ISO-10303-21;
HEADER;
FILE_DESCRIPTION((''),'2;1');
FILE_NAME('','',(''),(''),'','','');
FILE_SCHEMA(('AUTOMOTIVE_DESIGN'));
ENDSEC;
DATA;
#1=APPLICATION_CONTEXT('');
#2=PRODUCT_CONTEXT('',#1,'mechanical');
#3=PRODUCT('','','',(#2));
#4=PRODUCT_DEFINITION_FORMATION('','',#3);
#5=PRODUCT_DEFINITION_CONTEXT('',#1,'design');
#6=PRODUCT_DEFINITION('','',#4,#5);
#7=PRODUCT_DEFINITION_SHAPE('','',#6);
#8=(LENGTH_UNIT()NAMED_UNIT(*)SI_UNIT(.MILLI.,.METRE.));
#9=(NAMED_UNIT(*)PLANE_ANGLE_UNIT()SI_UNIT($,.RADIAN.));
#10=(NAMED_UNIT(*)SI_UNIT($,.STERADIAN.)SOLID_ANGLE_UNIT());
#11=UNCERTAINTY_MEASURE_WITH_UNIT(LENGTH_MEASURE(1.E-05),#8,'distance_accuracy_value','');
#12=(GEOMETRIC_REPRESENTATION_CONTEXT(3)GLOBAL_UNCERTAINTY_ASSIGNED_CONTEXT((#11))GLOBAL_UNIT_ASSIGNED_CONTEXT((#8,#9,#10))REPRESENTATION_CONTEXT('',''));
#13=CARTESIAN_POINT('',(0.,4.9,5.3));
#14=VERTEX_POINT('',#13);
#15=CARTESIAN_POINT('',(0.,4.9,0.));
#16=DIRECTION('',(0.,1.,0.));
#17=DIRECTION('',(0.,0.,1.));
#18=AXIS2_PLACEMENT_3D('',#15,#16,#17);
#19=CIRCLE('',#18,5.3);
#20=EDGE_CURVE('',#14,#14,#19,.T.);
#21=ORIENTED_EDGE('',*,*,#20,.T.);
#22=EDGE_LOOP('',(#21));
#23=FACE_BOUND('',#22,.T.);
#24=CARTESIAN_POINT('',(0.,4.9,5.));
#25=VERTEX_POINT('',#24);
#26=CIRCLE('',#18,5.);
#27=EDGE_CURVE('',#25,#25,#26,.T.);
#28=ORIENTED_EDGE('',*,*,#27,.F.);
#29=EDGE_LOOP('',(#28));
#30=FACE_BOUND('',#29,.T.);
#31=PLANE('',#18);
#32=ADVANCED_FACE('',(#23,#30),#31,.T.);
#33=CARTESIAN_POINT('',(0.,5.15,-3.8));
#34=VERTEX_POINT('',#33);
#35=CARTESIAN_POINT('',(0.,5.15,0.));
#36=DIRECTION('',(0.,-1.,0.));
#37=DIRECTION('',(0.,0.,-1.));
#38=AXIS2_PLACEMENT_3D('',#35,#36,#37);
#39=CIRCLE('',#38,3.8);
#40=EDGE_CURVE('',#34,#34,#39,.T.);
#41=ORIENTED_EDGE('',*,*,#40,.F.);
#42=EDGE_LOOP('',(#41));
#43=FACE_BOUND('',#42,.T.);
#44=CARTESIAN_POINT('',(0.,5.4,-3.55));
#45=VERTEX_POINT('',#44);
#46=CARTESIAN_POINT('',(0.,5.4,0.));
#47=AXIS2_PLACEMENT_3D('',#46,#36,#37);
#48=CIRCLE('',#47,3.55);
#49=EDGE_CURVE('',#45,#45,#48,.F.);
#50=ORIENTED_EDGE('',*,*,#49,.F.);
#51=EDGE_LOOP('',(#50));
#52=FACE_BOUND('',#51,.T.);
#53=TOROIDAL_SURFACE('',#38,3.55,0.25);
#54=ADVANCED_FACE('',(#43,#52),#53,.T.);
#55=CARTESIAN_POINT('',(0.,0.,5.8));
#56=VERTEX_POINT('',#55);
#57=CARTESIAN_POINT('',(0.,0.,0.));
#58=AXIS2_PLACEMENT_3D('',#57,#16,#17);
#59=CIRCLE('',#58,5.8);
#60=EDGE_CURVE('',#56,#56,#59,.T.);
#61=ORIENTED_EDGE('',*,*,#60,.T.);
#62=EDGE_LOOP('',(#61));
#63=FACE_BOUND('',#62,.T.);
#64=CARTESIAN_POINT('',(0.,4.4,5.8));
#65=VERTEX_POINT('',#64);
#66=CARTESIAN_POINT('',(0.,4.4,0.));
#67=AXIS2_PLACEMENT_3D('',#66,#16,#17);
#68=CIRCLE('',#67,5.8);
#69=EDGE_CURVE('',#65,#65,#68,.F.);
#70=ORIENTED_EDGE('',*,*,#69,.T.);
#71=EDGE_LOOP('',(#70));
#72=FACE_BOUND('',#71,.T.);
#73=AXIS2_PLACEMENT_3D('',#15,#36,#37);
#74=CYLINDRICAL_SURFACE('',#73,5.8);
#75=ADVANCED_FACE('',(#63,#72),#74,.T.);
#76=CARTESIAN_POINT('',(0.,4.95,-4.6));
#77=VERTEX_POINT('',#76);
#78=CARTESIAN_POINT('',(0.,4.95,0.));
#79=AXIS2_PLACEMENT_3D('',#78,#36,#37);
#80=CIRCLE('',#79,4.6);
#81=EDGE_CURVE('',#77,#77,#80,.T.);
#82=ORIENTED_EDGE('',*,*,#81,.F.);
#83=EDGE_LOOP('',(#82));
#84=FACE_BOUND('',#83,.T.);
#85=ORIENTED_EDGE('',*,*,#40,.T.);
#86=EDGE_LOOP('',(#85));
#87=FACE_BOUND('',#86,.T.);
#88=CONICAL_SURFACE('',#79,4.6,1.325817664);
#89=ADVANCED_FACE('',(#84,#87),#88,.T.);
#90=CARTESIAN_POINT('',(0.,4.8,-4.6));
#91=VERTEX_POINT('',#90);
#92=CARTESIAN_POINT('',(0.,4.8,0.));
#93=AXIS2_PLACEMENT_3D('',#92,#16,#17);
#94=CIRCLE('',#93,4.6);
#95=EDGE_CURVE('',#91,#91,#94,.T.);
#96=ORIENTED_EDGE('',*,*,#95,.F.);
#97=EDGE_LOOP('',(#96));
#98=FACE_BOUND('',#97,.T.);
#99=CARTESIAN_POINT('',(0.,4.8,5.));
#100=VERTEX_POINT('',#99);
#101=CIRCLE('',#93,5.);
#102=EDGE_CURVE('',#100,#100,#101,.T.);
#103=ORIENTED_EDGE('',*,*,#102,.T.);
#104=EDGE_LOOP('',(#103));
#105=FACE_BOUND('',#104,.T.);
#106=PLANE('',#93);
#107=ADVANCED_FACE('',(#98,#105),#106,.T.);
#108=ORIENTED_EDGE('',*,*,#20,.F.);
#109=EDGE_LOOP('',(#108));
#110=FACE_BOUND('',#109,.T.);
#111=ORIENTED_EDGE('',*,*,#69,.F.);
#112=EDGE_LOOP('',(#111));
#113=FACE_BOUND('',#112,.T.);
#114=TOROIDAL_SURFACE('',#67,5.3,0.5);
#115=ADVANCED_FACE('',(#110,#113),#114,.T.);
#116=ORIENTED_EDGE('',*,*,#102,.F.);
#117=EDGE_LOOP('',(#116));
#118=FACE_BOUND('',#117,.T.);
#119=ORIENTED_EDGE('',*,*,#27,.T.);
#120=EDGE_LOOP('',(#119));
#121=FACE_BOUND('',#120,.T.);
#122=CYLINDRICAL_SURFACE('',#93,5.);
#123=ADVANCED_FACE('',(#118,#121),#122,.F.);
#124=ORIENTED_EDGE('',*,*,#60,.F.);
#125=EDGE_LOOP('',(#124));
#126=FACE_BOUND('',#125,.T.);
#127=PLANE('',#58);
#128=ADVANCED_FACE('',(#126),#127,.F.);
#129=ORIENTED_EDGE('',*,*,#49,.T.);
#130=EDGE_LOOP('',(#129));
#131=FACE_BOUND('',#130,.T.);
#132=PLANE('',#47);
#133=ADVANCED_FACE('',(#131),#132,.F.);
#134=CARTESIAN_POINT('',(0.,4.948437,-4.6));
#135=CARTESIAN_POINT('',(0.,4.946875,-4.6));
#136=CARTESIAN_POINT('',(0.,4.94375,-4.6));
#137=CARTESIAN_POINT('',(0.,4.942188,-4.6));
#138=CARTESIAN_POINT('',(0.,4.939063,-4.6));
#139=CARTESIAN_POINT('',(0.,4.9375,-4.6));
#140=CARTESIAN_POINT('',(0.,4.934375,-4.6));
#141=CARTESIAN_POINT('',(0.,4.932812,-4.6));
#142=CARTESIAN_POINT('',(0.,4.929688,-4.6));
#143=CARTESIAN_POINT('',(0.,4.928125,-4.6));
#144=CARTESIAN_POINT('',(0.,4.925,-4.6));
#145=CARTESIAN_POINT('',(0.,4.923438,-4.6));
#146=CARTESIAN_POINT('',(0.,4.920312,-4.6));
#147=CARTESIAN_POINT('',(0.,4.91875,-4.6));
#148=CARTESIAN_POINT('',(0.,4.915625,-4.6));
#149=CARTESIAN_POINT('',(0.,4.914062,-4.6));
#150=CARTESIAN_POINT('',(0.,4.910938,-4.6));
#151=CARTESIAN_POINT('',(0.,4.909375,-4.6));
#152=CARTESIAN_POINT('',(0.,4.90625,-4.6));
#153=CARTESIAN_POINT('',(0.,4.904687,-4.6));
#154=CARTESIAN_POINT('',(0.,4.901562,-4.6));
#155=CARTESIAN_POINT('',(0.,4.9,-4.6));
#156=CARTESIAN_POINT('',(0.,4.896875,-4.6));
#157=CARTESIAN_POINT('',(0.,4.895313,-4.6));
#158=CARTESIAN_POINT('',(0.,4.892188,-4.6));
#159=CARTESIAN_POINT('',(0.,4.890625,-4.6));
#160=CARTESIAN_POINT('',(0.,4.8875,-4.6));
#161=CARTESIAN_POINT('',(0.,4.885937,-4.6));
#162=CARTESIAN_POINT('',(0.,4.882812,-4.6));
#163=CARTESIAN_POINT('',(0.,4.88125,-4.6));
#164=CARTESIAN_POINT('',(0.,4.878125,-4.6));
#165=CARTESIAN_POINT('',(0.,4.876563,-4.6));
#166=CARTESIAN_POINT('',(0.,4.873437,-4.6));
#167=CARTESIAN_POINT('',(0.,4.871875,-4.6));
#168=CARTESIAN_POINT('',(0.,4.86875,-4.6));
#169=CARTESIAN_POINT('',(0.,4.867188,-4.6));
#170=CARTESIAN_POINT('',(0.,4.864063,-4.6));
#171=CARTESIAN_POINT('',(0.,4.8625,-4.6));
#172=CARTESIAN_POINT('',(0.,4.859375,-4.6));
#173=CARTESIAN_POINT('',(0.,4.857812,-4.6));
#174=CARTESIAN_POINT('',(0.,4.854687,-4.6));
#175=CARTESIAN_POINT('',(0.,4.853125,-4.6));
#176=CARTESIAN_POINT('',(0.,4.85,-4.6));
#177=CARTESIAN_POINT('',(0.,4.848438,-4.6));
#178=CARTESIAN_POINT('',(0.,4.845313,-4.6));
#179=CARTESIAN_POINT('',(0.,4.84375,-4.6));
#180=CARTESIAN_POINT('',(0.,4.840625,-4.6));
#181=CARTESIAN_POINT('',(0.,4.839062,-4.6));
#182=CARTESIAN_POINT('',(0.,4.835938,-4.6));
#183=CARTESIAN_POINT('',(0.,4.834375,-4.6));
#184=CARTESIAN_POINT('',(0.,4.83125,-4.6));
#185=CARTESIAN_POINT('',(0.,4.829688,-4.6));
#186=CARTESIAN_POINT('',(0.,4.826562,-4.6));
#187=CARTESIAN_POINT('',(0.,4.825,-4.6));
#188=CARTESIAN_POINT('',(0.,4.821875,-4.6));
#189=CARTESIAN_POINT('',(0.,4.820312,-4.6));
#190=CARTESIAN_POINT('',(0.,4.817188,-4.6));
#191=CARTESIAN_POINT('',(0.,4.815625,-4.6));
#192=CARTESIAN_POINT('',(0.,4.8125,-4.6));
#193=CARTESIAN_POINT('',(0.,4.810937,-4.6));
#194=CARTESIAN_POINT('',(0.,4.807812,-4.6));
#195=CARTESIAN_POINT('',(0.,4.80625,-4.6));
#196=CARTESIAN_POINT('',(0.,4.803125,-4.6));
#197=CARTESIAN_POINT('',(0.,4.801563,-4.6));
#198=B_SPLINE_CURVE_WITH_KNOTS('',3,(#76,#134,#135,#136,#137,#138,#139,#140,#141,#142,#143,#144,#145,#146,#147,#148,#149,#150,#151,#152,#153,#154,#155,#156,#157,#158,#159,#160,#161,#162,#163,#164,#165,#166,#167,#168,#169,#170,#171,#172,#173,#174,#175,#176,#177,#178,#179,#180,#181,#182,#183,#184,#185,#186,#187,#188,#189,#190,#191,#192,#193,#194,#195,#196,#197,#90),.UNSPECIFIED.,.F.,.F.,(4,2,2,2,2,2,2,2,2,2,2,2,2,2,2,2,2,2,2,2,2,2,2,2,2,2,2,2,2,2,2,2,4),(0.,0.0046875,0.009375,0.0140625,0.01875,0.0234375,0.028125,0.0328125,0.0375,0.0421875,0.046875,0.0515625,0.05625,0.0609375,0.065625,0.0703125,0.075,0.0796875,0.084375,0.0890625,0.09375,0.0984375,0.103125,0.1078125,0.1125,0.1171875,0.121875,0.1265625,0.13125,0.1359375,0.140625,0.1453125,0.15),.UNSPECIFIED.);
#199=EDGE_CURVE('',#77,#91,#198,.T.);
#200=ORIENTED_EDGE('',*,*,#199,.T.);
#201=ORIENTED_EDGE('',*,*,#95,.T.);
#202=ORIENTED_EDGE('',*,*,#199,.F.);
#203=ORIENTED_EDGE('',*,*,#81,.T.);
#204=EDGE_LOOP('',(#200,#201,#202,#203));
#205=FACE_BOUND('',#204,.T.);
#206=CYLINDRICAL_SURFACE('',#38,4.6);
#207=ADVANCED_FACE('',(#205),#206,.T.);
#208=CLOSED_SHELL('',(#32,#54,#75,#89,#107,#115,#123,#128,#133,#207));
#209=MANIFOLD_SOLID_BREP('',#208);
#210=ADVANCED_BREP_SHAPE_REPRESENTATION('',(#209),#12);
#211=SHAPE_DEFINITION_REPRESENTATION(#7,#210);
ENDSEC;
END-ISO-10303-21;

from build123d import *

# Parameters (mm, degrees)
CROQUIS1_R              = 5.8
SALIENTE_EXTRUIR1_DEPTH = 4.9
REDONDEO1_R             = 0.5
CROQUIS2_R              = 5
CORTAR_EXTRUIR1_DEPTH   = 0.1
CROQUIS3_R              = 4.6
SALIENTE_EXTRUIR2_DEPTH = 5.15
CROQUIS4_R              = 3.8
SALIENTE_EXTRUIR3_DEPTH = 5.4
REDONDEO7_R             = 0.25
CHAFL_N1_SIZE           = 0.8
CHAFL_N1_SIZE_2         = 0.2


# Some blends are built 0.0001 mm under size
with BuildPart() as part:
    # Croquis1 → Saliente-Extruir1 (new body)
    with BuildSketch(Plane(origin=(0, 0, 0), x_dir=(1, 0, 0), z_dir=(0, 1, 0))):
        with Locations(Location((0, 0, 0), (0, 0, 270))):
            Circle(CROQUIS1_R)
    extrude(amount=SALIENTE_EXTRUIR1_DEPTH)

    # Redondeo1
    redondeo1_edges = [part.edges().sort_by_distance(p)[0] for p in [
        (0, 4.9, -5.8),
    ]]
    fillet(redondeo1_edges, radius=REDONDEO1_R)

    # Croquis2 → Cortar-Extruir1 (cut)
    with BuildSketch(Plane(origin=(0, 4.9, 0), x_dir=(1, 0, 0), z_dir=(0, 1, 0))):
        with Locations(Location((0, 0, 0), (0, 0, 270))):
            Circle(CROQUIS2_R)
    extrude(amount=-CORTAR_EXTRUIR1_DEPTH, mode=Mode.SUBTRACT)

    # Croquis3 → Saliente-Extruir2 (add)
    with BuildSketch(Plane.XZ):
        with Locations(Location((0, 0, 0), (0, 0, 270))):
            Circle(CROQUIS3_R)
    extrude(amount=-SALIENTE_EXTRUIR2_DEPTH)

    # Croquis4 → Saliente-Extruir3 (add)
    with BuildSketch(Plane.XZ):
        with Locations(Location((0, 0, 0), (0, 0, 270))):
            Circle(CROQUIS4_R)
    extrude(amount=-SALIENTE_EXTRUIR3_DEPTH)

    # Redondeo7
    redondeo7_edges = [part.edges().sort_by_distance(p)[0] for p in [
        (0, 5.4, 3.8),
    ]]
    fillet(redondeo7_edges, radius=REDONDEO7_R - 0.0001)  # a hair under: the kernel refuses the full size

    # Chaflán1
    # the kernel refuses this chamfer: 0.8, 0.2 mm, written as the material it takes off along each edge
    with BuildSketch(Plane(origin=(0, 5.15, 0), x_dir=(0, 0, -1), z_dir=(-1, 0, 0))) as chafl_n1_piece_1_section:
        Polygon((4.6 - CHAFL_N1_SIZE, 0), (4.6, CHAFL_N1_SIZE_2), (4.6, 0), align=None)
    chafl_n1_piece_1 = revolve(axis=Axis((0, 5.15, 0), (0, -1, 0)), mode=Mode.PRIVATE)
    chafl_n1_piece_1 = chafl_n1_piece_1 - Plane(origin=(0, 5.059567154, 0), x_dir=(0, 0, -1), z_dir=(0, -1, 0)) * Cylinder(3.8, 19, mode=Mode.PRIVATE)
    add(chafl_n1_piece_1, mode=Mode.SUBTRACT)


solid = part.part
